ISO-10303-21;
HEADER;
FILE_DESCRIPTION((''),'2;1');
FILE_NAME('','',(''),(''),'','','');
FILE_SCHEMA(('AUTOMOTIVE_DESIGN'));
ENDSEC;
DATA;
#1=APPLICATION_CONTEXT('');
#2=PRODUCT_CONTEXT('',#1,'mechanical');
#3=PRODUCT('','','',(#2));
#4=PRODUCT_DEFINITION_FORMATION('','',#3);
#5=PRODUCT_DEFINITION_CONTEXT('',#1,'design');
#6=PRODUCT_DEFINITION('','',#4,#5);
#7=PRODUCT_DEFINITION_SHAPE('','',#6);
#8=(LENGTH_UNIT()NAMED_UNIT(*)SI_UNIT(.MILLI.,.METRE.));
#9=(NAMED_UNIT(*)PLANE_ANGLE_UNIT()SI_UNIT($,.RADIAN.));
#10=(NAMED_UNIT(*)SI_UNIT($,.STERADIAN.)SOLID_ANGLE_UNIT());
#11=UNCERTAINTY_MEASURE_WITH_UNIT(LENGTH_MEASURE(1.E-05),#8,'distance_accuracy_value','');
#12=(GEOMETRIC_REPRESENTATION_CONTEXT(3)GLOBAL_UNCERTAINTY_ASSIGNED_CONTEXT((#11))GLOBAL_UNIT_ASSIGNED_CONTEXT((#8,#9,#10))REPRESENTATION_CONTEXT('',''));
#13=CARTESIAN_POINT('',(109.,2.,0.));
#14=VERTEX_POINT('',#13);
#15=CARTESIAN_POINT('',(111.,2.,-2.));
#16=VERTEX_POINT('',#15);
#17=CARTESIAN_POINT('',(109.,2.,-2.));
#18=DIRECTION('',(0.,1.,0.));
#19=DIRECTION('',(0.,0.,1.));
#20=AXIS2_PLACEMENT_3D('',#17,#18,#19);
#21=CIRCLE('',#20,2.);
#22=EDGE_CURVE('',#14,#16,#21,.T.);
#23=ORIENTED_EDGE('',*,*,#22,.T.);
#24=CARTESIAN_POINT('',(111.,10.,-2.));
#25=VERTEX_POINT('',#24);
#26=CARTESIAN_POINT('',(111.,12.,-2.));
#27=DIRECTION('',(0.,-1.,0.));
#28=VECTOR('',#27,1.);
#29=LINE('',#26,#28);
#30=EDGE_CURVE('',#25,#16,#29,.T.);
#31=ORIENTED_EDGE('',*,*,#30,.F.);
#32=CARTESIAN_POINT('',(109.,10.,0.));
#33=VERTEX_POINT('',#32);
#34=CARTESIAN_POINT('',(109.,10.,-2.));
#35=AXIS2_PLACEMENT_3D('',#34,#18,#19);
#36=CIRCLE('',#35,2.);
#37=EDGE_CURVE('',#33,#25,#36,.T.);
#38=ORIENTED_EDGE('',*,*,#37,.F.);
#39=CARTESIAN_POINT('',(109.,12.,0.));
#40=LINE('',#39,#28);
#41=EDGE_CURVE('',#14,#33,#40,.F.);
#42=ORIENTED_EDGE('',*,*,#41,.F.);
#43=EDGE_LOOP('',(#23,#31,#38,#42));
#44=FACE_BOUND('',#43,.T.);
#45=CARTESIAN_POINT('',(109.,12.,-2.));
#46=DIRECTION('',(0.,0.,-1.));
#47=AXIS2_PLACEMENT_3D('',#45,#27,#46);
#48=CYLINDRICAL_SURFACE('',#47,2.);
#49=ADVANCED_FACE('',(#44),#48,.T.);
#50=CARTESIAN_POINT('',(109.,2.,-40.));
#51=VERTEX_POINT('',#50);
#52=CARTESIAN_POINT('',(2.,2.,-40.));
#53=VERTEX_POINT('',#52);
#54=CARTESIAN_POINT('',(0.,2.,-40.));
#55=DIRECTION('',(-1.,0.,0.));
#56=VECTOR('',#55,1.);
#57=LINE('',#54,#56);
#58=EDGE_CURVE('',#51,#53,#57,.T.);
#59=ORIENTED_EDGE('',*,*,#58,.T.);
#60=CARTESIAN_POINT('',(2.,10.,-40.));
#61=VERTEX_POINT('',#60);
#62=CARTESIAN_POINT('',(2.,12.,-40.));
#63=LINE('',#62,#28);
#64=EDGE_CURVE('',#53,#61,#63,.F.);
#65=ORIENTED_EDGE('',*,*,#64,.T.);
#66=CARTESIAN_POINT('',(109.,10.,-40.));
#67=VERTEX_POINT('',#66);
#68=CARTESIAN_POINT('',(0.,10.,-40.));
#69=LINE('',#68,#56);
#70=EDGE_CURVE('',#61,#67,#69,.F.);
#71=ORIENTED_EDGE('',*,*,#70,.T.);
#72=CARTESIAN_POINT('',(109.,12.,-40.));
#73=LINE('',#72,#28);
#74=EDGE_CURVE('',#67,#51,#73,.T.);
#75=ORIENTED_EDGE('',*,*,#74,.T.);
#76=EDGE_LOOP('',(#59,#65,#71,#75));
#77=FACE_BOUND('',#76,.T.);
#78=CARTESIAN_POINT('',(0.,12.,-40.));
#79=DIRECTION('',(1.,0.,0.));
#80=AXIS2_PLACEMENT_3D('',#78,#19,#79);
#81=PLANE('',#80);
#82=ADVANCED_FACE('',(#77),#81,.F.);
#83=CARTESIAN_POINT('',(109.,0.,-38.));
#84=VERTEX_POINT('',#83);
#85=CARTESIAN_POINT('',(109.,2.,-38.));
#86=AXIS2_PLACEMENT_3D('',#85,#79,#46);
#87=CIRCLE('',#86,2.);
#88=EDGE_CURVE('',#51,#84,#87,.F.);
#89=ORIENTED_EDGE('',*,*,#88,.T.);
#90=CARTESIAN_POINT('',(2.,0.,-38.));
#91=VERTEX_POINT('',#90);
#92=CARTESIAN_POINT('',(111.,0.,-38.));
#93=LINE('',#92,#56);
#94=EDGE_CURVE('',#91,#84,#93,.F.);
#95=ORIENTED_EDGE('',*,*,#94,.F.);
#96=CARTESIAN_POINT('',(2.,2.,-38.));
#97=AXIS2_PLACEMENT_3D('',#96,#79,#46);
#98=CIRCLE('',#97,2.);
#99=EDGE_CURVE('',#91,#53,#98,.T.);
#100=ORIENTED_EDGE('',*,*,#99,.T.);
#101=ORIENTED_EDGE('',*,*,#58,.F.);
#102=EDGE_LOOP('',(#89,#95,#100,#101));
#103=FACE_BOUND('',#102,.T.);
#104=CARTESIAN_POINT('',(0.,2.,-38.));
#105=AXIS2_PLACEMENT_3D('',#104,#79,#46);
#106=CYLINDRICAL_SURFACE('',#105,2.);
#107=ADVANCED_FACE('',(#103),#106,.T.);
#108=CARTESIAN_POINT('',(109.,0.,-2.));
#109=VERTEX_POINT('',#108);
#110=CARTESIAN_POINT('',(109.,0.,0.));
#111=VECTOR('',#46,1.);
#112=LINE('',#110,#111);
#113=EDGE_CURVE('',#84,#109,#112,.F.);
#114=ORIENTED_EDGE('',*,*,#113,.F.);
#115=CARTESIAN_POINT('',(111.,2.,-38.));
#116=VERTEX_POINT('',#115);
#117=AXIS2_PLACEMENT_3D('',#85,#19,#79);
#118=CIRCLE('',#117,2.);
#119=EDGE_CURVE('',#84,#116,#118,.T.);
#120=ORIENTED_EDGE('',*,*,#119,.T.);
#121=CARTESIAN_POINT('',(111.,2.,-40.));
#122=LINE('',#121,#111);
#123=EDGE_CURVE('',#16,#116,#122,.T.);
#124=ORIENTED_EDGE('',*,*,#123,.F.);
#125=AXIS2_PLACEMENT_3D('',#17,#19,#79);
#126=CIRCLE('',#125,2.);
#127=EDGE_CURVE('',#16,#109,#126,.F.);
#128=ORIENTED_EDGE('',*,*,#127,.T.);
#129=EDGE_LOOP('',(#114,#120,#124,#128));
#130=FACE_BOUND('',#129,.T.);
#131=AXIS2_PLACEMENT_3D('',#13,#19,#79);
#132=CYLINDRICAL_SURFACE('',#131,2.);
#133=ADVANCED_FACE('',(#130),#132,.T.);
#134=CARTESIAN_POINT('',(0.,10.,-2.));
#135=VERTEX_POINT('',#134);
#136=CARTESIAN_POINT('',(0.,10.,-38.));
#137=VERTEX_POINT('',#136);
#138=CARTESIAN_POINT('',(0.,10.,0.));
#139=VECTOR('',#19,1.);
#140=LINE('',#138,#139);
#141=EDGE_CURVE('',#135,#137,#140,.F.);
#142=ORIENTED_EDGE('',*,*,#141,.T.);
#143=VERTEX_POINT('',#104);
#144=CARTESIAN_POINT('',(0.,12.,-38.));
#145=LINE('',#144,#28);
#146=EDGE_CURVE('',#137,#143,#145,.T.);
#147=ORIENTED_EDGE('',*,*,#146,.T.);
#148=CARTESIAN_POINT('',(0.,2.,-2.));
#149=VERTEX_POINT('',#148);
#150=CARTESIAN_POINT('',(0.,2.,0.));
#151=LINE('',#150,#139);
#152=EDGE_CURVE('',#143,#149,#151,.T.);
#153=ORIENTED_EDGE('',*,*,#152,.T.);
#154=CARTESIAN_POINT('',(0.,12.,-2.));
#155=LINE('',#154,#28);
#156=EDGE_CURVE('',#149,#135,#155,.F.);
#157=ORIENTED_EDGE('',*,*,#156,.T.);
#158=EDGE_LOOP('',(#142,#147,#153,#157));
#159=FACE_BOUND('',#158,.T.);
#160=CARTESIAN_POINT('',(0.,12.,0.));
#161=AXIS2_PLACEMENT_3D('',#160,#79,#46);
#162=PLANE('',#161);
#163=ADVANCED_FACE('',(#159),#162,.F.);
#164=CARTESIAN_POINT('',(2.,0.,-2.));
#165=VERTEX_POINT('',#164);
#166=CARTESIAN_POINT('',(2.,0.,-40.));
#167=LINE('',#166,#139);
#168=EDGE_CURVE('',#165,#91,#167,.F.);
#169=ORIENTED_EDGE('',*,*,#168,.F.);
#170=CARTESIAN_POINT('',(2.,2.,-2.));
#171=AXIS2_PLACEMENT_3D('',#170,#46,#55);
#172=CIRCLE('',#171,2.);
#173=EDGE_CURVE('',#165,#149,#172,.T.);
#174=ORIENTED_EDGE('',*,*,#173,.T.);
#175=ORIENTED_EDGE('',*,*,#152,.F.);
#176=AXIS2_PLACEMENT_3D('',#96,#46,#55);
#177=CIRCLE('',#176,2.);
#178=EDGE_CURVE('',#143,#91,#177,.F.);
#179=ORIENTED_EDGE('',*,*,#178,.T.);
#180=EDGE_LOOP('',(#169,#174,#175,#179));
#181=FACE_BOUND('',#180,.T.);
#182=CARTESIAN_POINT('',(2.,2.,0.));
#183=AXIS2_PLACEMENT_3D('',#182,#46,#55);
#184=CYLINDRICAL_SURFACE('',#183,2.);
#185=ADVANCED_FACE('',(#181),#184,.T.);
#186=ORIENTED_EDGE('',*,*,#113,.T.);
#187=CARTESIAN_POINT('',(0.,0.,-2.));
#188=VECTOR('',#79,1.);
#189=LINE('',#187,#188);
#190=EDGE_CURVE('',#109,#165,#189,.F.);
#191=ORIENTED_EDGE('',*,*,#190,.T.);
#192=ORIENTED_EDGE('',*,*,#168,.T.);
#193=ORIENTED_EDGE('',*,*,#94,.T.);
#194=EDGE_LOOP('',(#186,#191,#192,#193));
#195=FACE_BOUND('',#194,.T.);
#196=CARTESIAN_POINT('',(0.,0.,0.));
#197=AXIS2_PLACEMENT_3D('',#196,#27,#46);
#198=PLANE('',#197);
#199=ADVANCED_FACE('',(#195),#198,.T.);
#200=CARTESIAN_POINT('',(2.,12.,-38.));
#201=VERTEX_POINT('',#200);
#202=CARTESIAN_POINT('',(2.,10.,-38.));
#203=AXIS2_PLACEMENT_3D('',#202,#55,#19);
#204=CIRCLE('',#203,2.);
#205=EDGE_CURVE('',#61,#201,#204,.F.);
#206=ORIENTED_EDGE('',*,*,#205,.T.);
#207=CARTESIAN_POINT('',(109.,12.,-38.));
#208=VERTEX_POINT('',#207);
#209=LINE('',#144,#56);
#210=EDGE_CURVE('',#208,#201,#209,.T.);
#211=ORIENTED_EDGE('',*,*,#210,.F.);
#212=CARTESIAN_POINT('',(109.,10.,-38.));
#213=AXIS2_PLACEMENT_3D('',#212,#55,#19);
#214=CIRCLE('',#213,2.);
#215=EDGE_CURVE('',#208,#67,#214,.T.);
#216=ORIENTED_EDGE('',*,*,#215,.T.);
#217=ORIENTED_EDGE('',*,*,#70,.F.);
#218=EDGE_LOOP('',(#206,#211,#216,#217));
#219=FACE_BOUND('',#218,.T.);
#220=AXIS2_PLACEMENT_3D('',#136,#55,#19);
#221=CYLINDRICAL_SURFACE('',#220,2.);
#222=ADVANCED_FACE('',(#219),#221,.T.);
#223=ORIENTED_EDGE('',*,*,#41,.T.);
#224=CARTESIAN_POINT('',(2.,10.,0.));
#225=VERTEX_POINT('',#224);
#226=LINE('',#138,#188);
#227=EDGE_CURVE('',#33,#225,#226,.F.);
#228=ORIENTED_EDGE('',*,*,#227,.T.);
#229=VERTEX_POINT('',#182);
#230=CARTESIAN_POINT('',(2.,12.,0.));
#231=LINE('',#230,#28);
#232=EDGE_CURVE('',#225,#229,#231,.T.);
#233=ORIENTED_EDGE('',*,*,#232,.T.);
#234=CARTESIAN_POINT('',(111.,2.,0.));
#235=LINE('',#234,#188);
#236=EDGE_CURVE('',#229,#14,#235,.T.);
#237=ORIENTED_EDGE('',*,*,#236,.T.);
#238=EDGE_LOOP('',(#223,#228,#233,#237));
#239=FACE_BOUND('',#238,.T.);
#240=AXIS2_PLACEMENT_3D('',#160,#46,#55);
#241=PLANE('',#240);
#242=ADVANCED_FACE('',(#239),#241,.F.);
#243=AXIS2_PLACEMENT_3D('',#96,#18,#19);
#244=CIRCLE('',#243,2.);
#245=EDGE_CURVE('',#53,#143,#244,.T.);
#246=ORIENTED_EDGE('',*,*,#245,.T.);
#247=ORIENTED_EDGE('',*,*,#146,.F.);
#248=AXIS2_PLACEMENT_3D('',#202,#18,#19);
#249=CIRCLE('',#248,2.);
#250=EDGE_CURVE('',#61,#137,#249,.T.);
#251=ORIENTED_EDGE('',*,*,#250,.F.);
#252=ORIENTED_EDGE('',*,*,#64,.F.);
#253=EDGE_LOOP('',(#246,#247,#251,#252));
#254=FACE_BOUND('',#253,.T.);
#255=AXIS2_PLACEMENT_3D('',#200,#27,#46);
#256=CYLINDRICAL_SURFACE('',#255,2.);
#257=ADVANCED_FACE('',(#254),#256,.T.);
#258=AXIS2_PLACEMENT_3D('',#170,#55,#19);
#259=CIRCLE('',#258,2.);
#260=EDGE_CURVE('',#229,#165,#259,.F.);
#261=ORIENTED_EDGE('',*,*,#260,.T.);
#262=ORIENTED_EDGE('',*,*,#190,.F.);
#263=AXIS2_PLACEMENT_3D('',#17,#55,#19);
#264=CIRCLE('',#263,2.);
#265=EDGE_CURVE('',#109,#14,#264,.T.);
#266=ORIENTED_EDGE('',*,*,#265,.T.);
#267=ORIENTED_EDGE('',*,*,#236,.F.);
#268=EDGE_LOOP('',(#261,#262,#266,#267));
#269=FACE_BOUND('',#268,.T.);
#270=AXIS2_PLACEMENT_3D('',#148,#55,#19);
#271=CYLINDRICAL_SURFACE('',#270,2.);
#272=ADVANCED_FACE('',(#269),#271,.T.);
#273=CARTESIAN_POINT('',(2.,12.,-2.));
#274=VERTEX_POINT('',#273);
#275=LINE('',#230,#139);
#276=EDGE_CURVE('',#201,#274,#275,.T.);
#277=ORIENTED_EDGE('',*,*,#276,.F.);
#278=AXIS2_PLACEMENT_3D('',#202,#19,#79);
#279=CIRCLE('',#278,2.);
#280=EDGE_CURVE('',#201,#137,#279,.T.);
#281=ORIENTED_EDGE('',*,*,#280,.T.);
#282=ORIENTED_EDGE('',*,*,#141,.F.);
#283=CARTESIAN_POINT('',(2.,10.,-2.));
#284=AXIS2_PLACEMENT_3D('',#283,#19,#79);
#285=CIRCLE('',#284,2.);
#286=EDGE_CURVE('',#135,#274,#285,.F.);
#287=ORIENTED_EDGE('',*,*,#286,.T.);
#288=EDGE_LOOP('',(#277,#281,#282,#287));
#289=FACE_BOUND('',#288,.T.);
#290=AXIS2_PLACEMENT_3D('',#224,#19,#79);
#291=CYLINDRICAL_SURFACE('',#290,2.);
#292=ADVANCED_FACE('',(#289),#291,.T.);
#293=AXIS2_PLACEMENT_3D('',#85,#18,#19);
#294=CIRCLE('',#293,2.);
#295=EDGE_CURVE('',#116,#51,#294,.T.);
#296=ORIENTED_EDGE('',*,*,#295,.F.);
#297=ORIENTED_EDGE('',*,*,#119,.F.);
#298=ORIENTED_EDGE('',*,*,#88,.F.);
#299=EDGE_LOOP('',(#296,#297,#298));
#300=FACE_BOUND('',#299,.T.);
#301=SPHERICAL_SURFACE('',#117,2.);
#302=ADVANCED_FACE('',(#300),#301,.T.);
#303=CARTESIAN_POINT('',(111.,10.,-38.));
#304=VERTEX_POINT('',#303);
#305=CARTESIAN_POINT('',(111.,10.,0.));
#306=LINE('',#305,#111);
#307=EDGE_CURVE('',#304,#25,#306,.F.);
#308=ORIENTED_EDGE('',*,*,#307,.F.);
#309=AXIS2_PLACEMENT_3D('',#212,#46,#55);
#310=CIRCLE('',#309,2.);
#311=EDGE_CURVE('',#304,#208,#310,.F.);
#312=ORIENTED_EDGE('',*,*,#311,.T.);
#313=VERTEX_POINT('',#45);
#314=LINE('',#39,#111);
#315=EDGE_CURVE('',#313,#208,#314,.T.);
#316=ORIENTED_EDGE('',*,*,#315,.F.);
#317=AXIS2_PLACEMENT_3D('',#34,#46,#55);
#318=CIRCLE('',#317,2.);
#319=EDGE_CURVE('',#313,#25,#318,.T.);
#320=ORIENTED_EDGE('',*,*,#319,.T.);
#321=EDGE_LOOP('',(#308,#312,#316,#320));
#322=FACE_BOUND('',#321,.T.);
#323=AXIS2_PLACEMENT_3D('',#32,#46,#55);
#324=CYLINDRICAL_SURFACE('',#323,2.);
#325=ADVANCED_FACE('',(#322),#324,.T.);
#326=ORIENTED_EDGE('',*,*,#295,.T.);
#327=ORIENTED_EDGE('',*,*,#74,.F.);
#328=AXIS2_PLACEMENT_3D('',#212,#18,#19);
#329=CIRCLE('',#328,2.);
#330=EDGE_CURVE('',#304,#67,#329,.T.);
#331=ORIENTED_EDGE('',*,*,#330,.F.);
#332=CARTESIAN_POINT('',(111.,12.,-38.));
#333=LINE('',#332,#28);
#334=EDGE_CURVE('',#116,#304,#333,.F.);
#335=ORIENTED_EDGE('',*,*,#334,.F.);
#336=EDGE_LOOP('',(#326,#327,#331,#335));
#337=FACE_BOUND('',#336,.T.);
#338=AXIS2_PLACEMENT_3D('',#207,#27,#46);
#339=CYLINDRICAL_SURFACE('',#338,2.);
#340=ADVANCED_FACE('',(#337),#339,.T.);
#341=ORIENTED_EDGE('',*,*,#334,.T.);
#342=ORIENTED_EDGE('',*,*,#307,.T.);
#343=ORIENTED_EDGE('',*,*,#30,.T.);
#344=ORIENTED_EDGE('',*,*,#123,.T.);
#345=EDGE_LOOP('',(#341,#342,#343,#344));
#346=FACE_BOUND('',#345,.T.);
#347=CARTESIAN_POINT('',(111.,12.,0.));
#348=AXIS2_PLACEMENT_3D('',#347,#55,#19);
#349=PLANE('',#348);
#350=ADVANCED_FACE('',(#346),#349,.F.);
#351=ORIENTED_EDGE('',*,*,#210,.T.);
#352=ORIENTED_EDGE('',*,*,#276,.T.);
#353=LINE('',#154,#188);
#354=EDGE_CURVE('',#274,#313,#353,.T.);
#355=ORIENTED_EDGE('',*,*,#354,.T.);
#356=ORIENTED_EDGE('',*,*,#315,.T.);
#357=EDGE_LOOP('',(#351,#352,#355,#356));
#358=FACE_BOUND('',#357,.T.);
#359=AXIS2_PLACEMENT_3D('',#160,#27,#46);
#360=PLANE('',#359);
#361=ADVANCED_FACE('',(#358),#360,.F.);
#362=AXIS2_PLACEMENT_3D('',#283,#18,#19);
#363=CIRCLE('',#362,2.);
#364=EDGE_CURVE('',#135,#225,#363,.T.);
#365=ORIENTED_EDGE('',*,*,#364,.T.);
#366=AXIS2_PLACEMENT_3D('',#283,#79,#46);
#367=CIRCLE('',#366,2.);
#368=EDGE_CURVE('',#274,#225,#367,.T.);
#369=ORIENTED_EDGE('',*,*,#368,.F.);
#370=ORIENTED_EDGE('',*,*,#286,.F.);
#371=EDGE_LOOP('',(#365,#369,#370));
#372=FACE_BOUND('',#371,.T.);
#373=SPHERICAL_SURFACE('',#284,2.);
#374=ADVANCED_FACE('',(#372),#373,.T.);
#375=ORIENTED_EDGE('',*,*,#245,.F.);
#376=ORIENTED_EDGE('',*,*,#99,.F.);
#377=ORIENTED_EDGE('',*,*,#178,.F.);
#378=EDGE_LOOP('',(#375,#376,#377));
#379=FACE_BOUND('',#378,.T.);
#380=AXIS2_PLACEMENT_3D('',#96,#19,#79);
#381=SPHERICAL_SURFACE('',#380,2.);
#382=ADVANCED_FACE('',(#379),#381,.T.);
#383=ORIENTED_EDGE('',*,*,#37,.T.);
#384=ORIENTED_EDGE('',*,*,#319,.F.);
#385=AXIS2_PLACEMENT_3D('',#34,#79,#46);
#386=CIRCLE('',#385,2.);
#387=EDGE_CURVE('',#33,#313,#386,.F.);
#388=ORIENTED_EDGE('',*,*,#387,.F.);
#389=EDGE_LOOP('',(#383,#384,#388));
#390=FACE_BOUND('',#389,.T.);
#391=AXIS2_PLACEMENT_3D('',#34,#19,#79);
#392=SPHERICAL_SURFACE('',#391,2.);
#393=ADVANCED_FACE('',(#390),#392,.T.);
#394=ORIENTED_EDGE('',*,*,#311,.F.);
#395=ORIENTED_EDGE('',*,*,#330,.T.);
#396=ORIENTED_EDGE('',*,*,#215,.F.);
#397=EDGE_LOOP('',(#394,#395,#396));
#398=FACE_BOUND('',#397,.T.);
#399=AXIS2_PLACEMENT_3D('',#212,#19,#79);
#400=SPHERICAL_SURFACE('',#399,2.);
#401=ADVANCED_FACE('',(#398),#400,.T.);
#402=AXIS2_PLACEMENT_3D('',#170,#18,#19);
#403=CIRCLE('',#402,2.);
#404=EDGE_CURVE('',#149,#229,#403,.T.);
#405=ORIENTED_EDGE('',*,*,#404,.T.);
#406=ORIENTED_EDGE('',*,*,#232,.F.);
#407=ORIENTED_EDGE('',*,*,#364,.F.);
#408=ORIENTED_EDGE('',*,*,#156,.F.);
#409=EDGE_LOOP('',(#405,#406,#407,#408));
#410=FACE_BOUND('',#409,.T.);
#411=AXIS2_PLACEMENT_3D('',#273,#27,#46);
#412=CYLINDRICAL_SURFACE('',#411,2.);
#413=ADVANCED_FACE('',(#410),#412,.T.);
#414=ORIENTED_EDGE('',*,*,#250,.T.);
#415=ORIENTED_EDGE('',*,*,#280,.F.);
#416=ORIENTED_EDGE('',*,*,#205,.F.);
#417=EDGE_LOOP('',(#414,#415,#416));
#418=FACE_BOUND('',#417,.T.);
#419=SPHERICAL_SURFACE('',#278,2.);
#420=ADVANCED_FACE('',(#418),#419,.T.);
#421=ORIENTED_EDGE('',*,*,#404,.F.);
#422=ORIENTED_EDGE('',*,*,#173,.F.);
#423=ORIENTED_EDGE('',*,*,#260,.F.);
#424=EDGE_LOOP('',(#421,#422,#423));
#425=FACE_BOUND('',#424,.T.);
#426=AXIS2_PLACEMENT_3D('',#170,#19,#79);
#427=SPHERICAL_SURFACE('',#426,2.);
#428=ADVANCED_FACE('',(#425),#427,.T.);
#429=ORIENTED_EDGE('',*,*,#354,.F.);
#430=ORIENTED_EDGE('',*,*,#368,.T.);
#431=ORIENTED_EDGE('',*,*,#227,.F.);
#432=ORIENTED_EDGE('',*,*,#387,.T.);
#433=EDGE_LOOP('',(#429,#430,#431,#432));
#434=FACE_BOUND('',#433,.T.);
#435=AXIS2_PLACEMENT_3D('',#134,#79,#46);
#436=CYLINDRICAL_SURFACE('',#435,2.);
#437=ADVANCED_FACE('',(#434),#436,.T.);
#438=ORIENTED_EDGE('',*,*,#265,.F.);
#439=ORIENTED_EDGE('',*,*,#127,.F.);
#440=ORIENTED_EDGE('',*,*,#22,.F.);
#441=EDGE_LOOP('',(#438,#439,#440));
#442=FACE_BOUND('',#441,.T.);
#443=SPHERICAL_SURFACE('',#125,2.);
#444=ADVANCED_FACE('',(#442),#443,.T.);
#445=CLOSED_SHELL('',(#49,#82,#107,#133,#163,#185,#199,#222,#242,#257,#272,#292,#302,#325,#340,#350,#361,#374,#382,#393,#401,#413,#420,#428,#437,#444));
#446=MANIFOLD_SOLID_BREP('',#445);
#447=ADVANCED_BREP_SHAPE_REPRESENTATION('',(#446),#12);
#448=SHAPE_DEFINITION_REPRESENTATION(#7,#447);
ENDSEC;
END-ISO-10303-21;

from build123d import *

# Parameters (mm, degrees)
ESBO_O1_W                = 111
ESBO_O1_H                = 40
RESSALTO_EXTRUS_O1_DEPTH = 12
FILETE1_R                = 2
FILETE2_R                = 2


with BuildPart() as part:
    # Esboço1 → Ressalto-extrusão1 (new body)
    with BuildSketch(Plane(origin=(0, 0, 0), x_dir=(1, 0, 0), z_dir=(0, 1, 0))):
        with Locations((55.5, 20)):
            Rectangle(ESBO_O1_W, ESBO_O1_H)
    extrude(amount=RESSALTO_EXTRUS_O1_DEPTH)

    # Filete1
    filete1_edges = [part.edges().sort_by_distance(p)[0] for p in [
        (111, 12, -20),
        (55.5, 12, -40),
        (0, 12, -20),
        (55.5, 0, -40),
        (111, 0, -20),
        (55.5, 0, 0),
        (0, 0, -20),
        (55.5, 12, 0),
    ]]
    fillet(filete1_edges, radius=FILETE1_R)

    # Filete2
    # the kernel refuses this fillet: 2 mm, written as the material it takes off along each edge
    with BuildSketch(Plane(origin=(2, 2, -38), x_dir=(0, 0, -1), z_dir=(-1, 0, 0))) as filete2_piece_1_section:
        Polygon((0, 0), (FILETE2_R, 0), (FILETE2_R, FILETE2_R), (0, FILETE2_R), align=None)
    filete2_piece_1 = extrude(amount=FILETE2_R, mode=Mode.PRIVATE)
    filete2_piece_1 = filete2_piece_1 - Plane(origin=(2, 2, -38), x_dir=(0, 0.7071067811865475, 0.7071067811865475), z_dir=(-1, 0, 0)) * Sphere(FILETE2_R, mode=Mode.PRIVATE)
    add(filete2_piece_1, mode=Mode.SUBTRACT)
    with BuildSketch(Plane(origin=(109, 2, -38), x_dir=(0, 0, -1), z_dir=(1, 0, 0))) as filete2_piece_2_section:
        Polygon((0, 0), (FILETE2_R, 0), (FILETE2_R, -FILETE2_R), (0, -FILETE2_R), align=None)
    filete2_piece_2 = extrude(amount=FILETE2_R, mode=Mode.PRIVATE)
    filete2_piece_2 = filete2_piece_2 - Plane(origin=(109, 2, -38), x_dir=(0, 0.7071067811865475, 0.7071067811865475), z_dir=(1, 0, 0)) * Sphere(FILETE2_R, mode=Mode.PRIVATE)
    add(filete2_piece_2, mode=Mode.SUBTRACT)
    with BuildSketch(Plane(origin=(2, 2, -2), x_dir=(-1, 0, 0), z_dir=(0, 0, 1))) as filete2_piece_3_section:
        Polygon((0, 0), (FILETE2_R, 0), (FILETE2_R, FILETE2_R), (0, FILETE2_R), align=None)
    filete2_piece_3 = extrude(amount=FILETE2_R, mode=Mode.PRIVATE)
    filete2_piece_3 = filete2_piece_3 - Plane(origin=(2, 2, -2), x_dir=(0.7071067811865475, 0.7071067811865475, 0), z_dir=(0, 0, 1)) * Sphere(FILETE2_R, mode=Mode.PRIVATE)
    add(filete2_piece_3, mode=Mode.SUBTRACT)
    with BuildSketch(Plane(origin=(109, 2, -2), x_dir=(1, 0, 0), z_dir=(0, 0, 1))) as filete2_piece_4_section:
        Polygon((0, 0), (FILETE2_R, 0), (FILETE2_R, -FILETE2_R), (0, -FILETE2_R), align=None)
    filete2_piece_4 = extrude(amount=FILETE2_R, mode=Mode.PRIVATE)
    filete2_piece_4 = filete2_piece_4 - Plane(origin=(109, 2, -2), x_dir=(-0.7071067811865475, 0.7071067811865475, 0), z_dir=(0, 0, 1)) * Sphere(FILETE2_R, mode=Mode.PRIVATE)
    add(filete2_piece_4, mode=Mode.SUBTRACT)
    with BuildSketch(Plane(origin=(109, 10, -2), x_dir=(1, 0, 0), z_dir=(0, 0, 1))) as filete2_piece_5_section:
        Polygon((0, 0), (FILETE2_R, 0), (FILETE2_R, FILETE2_R), (0, FILETE2_R), align=None)
    filete2_piece_5 = extrude(amount=FILETE2_R, mode=Mode.PRIVATE)
    filete2_piece_5 = filete2_piece_5 - Plane(origin=(109, 10, -2), x_dir=(-0.7071067811865475, -0.7071067811865475, 0), z_dir=(0, 0, 1)) * Sphere(FILETE2_R, mode=Mode.PRIVATE)
    add(filete2_piece_5, mode=Mode.SUBTRACT)
    with BuildSketch(Plane(origin=(2, 10, -2), x_dir=(-1, 0, 0), z_dir=(0, 0, 1))) as filete2_piece_6_section:
        Polygon((0, 0), (FILETE2_R, 0), (FILETE2_R, -FILETE2_R), (0, -FILETE2_R), align=None)
    filete2_piece_6 = extrude(amount=FILETE2_R, mode=Mode.PRIVATE)
    filete2_piece_6 = filete2_piece_6 - Plane(origin=(2, 10, -2), x_dir=(0.7071067811865475, -0.7071067811865475, 0), z_dir=(0, 0, 1)) * Sphere(FILETE2_R, mode=Mode.PRIVATE)
    add(filete2_piece_6, mode=Mode.SUBTRACT)
    with BuildSketch(Plane(origin=(109, 10, -38), x_dir=(0, 0, -1), z_dir=(1, 0, 0))) as filete2_piece_7_section:
        Polygon((0, 0), (FILETE2_R, 0), (FILETE2_R, FILETE2_R), (0, FILETE2_R), align=None)
    filete2_piece_7 = extrude(amount=FILETE2_R, mode=Mode.PRIVATE)
    filete2_piece_7 = filete2_piece_7 - Plane(origin=(109, 10, -38), x_dir=(0, -0.7071067811865475, 0.7071067811865475), z_dir=(1, 0, 0)) * Sphere(FILETE2_R, mode=Mode.PRIVATE)
    add(filete2_piece_7, mode=Mode.SUBTRACT)
    with BuildSketch(Plane(origin=(2, 10, -38), x_dir=(0, 0, -1), z_dir=(-1, 0, 0))) as filete2_piece_8_section:
        Polygon((0, 0), (FILETE2_R, 0), (FILETE2_R, -FILETE2_R), (0, -FILETE2_R), align=None)
    filete2_piece_8 = extrude(amount=FILETE2_R, mode=Mode.PRIVATE)
    filete2_piece_8 = filete2_piece_8 - Plane(origin=(2, 10, -38), x_dir=(0, -0.7071067811865475, 0.7071067811865475), z_dir=(-1, 0, 0)) * Sphere(FILETE2_R, mode=Mode.PRIVATE)
    add(filete2_piece_8, mode=Mode.SUBTRACT)
    with BuildSketch(Plane(origin=(111, 2, 0), x_dir=(-1, 0, 0), z_dir=(0, 1, 0)), Plane(origin=(111, 2, -40), x_dir=(0, 0, 1), z_dir=(0, 1, 0))) as filete2_piece_9:
        with BuildLine():
            CenterArc((FILETE2_R, -FILETE2_R), FILETE2_R, 90, 90)
            Line((0, -FILETE2_R), (0, 0))
            Line((0, 0), (FILETE2_R, 0))
        make_face()
    extrude(amount=8, mode=Mode.SUBTRACT)
    with BuildSketch(Plane(origin=(0, 2, 0), x_dir=(1, 0, 0), z_dir=(0, 1, 0)), Plane(origin=(0, 2, -40), x_dir=(0, 0, 1), z_dir=(0, 1, 0))) as filete2_piece_10:
        with BuildLine():
            CenterArc((FILETE2_R, FILETE2_R), FILETE2_R, 180, 90)
            Line((0, FILETE2_R), (0, 0))
            Line((0, 0), (FILETE2_R, 0))
        make_face()
    extrude(amount=8, mode=Mode.SUBTRACT)


solid = part.part
